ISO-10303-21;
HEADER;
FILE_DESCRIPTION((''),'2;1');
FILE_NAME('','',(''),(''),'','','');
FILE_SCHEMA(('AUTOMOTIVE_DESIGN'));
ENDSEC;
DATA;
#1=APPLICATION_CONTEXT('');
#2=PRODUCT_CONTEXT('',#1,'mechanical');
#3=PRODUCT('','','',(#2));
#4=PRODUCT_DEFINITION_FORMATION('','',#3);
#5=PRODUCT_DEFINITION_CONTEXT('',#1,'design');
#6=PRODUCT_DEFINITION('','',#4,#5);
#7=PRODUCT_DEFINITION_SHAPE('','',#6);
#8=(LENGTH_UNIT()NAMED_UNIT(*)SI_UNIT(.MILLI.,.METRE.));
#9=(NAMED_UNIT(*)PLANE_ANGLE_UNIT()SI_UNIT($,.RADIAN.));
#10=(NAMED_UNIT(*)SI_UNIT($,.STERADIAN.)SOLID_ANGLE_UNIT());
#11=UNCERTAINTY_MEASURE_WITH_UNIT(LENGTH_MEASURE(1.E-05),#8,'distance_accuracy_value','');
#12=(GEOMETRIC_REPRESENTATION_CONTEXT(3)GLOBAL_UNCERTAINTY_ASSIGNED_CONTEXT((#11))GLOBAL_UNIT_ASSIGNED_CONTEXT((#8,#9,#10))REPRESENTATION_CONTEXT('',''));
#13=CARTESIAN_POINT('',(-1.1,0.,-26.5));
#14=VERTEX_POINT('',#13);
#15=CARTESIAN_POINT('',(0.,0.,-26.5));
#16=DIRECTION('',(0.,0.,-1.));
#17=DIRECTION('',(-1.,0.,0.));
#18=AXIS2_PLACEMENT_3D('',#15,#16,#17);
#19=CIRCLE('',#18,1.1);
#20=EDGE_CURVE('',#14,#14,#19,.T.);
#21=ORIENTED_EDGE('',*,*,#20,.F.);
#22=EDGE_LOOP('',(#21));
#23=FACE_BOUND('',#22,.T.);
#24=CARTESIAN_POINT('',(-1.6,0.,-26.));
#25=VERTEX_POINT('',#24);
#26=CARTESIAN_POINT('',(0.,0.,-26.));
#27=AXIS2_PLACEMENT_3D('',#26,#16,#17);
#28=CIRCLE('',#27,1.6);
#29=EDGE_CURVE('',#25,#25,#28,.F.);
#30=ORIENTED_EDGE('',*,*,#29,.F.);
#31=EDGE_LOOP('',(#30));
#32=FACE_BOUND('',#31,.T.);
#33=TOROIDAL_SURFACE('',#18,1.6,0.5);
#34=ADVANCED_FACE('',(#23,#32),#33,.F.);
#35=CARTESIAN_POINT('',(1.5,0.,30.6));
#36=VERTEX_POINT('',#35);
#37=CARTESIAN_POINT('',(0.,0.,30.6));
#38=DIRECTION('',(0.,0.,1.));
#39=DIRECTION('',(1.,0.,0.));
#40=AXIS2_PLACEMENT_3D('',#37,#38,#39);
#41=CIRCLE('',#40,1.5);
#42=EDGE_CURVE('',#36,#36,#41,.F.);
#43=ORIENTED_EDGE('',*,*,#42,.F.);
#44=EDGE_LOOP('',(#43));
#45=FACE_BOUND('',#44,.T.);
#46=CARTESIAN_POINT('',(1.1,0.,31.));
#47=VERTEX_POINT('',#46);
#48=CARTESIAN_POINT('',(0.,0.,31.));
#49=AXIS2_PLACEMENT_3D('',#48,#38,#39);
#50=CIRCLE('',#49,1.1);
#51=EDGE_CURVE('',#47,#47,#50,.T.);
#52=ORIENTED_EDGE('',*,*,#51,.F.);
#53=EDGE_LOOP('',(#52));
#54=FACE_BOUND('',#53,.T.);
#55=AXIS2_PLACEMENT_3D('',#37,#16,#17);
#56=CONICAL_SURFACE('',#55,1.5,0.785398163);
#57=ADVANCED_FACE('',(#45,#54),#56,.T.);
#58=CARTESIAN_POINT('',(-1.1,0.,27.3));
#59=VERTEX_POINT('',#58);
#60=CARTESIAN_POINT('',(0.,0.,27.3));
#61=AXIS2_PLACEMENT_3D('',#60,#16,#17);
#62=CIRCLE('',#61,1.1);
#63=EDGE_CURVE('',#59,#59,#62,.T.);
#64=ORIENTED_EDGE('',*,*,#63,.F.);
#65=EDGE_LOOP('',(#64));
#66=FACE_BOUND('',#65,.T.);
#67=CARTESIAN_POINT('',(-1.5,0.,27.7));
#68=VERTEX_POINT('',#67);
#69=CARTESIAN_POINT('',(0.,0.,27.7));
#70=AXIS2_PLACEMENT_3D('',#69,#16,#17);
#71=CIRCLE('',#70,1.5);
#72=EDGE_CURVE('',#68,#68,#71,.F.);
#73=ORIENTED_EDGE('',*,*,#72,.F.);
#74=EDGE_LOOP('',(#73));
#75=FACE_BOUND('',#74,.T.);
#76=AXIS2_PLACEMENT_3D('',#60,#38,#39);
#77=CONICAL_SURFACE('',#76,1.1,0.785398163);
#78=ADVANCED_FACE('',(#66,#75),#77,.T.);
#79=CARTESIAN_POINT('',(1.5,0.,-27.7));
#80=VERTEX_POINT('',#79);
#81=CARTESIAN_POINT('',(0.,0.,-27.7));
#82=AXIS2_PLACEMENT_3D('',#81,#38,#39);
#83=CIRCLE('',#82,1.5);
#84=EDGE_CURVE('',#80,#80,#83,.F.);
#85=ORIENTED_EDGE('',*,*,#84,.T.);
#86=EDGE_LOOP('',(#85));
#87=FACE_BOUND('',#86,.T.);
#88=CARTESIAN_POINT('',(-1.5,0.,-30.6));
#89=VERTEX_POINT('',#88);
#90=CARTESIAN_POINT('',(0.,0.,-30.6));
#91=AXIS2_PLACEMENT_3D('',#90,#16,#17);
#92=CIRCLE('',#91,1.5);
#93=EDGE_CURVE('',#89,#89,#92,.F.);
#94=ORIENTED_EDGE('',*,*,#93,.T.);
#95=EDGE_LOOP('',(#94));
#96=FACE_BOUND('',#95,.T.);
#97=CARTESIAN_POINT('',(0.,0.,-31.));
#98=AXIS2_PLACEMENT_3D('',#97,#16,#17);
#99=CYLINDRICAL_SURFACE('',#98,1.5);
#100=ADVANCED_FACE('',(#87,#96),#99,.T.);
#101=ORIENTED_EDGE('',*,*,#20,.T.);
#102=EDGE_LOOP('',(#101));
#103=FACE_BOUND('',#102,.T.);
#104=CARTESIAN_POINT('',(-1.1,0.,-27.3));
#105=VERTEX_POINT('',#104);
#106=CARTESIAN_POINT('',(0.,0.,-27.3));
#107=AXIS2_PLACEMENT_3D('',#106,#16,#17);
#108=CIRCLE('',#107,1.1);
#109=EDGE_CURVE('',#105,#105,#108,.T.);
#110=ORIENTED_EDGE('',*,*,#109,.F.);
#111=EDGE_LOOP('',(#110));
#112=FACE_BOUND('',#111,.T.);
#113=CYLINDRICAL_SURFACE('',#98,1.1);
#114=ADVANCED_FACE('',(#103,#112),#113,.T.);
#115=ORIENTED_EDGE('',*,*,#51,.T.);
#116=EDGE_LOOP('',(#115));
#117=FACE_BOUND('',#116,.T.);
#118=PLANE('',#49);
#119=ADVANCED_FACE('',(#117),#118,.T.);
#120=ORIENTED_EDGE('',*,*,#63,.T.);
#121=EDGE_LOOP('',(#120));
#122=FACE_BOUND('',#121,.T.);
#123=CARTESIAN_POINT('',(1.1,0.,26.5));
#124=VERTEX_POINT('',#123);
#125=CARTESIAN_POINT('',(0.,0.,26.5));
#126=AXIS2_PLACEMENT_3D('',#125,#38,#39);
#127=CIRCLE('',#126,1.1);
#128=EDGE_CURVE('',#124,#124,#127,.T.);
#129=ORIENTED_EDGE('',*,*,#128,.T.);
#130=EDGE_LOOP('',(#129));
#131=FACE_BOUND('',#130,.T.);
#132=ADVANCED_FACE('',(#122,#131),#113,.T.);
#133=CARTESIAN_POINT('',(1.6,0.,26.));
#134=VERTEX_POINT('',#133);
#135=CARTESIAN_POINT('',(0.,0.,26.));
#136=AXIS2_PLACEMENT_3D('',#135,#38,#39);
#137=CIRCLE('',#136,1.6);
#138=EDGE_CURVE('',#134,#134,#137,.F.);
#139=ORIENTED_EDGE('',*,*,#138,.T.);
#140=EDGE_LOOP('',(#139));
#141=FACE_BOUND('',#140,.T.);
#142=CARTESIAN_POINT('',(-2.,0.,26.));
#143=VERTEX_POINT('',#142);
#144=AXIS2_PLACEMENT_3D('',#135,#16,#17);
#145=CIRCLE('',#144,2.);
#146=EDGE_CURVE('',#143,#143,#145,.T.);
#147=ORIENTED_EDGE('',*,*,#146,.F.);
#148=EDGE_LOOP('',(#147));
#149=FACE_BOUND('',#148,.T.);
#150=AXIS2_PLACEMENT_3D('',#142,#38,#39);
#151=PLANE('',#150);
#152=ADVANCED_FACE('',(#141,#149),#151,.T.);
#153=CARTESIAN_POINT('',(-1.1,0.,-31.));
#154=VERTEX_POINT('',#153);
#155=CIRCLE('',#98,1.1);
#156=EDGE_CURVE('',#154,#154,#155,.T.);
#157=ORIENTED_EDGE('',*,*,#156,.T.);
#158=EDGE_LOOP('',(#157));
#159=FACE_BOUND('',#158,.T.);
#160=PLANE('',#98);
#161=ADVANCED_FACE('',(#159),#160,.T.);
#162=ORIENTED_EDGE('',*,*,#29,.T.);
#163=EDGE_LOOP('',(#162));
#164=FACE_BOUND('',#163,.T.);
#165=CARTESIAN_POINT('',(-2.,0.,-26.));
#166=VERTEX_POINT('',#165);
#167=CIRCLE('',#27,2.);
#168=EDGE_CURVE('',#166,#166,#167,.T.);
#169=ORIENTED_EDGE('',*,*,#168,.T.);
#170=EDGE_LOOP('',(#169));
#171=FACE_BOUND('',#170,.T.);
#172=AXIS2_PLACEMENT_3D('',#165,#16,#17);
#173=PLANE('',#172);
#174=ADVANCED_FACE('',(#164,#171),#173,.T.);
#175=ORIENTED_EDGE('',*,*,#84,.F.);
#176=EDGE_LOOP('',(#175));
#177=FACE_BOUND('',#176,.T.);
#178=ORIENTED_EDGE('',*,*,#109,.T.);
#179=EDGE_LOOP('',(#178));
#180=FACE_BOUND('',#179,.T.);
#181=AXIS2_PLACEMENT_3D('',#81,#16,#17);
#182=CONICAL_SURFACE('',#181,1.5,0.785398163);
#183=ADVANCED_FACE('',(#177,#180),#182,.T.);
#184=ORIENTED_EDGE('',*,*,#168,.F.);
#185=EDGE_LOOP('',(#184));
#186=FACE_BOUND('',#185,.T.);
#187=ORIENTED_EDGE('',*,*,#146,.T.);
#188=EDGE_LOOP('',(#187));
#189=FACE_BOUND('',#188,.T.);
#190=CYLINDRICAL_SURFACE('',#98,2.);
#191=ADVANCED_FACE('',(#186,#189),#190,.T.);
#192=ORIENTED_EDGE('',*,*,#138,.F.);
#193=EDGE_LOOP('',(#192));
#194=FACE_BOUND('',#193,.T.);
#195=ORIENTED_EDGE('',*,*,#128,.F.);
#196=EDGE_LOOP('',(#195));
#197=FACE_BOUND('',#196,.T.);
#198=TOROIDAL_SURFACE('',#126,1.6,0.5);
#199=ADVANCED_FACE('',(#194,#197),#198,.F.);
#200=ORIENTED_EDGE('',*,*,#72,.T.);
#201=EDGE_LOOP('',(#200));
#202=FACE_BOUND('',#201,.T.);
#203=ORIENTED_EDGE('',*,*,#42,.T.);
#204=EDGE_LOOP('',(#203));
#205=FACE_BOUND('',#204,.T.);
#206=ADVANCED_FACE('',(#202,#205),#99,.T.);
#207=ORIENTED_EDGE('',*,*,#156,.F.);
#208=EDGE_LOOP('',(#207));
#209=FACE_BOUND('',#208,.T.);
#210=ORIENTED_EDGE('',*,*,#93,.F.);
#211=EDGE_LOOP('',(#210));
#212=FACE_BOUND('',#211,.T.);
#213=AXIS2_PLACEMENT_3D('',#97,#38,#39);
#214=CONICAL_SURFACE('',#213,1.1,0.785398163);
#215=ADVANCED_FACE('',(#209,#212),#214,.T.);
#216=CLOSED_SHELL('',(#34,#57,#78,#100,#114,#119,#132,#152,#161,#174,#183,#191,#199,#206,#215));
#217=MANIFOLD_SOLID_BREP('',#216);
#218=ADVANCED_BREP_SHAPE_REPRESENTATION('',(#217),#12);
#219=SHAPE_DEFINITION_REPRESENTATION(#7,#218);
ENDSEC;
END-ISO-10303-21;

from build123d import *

# Parameters (mm, degrees)
CHAMFER_1_SIZE = 0.4
CHAMFER_2_SIZE = 0.4
FILLET_1_R     = 0.5


with BuildPart() as part:
    # Эскиз1 → Повернуть1 (revolve)
    with BuildSketch(Plane(origin=(0, 0, 0), x_dir=(1, 0, 0), z_dir=(0, 1, 0))):
        Polygon((0, 31), (-1.5, 31), (-1.5, 27.3), (-1.1, 27.3), (-1.1, 26), (-2, 26), (-2, -26), (-1.1, -26), (-1.1, -27.3), (-1.5, -27.3), (-1.5, -31), (0, -31), align=None)
    revolve(axis=Axis((0, 0, -31), (0, 0, 1)))

    # Фаска1
    chamfer_1_edges = [part.edges().sort_by_distance(p)[0] for p in [
        (1.5, 0, -31),
        (1.5, 0, 31),
    ]]
    chamfer(chamfer_1_edges, length=CHAMFER_1_SIZE)

    # Фаска2
    chamfer_2_edges = [part.edges().sort_by_distance(p)[0] for p in [
        (1.5, 0, -27.3),
        (1.5, 0, 27.3),
    ]]
    chamfer(chamfer_2_edges, length=CHAMFER_2_SIZE - 0.0001)  # a hair under: the kernel refuses the full size

    # Скругление1
    fillet_1_edges = [part.edges().sort_by_distance(p)[0] for p in [
        (1.1, 0, -26),
        (1.1, 0, 26),
    ]]
    fillet(fillet_1_edges, radius=FILLET_1_R)


solid = part.part
